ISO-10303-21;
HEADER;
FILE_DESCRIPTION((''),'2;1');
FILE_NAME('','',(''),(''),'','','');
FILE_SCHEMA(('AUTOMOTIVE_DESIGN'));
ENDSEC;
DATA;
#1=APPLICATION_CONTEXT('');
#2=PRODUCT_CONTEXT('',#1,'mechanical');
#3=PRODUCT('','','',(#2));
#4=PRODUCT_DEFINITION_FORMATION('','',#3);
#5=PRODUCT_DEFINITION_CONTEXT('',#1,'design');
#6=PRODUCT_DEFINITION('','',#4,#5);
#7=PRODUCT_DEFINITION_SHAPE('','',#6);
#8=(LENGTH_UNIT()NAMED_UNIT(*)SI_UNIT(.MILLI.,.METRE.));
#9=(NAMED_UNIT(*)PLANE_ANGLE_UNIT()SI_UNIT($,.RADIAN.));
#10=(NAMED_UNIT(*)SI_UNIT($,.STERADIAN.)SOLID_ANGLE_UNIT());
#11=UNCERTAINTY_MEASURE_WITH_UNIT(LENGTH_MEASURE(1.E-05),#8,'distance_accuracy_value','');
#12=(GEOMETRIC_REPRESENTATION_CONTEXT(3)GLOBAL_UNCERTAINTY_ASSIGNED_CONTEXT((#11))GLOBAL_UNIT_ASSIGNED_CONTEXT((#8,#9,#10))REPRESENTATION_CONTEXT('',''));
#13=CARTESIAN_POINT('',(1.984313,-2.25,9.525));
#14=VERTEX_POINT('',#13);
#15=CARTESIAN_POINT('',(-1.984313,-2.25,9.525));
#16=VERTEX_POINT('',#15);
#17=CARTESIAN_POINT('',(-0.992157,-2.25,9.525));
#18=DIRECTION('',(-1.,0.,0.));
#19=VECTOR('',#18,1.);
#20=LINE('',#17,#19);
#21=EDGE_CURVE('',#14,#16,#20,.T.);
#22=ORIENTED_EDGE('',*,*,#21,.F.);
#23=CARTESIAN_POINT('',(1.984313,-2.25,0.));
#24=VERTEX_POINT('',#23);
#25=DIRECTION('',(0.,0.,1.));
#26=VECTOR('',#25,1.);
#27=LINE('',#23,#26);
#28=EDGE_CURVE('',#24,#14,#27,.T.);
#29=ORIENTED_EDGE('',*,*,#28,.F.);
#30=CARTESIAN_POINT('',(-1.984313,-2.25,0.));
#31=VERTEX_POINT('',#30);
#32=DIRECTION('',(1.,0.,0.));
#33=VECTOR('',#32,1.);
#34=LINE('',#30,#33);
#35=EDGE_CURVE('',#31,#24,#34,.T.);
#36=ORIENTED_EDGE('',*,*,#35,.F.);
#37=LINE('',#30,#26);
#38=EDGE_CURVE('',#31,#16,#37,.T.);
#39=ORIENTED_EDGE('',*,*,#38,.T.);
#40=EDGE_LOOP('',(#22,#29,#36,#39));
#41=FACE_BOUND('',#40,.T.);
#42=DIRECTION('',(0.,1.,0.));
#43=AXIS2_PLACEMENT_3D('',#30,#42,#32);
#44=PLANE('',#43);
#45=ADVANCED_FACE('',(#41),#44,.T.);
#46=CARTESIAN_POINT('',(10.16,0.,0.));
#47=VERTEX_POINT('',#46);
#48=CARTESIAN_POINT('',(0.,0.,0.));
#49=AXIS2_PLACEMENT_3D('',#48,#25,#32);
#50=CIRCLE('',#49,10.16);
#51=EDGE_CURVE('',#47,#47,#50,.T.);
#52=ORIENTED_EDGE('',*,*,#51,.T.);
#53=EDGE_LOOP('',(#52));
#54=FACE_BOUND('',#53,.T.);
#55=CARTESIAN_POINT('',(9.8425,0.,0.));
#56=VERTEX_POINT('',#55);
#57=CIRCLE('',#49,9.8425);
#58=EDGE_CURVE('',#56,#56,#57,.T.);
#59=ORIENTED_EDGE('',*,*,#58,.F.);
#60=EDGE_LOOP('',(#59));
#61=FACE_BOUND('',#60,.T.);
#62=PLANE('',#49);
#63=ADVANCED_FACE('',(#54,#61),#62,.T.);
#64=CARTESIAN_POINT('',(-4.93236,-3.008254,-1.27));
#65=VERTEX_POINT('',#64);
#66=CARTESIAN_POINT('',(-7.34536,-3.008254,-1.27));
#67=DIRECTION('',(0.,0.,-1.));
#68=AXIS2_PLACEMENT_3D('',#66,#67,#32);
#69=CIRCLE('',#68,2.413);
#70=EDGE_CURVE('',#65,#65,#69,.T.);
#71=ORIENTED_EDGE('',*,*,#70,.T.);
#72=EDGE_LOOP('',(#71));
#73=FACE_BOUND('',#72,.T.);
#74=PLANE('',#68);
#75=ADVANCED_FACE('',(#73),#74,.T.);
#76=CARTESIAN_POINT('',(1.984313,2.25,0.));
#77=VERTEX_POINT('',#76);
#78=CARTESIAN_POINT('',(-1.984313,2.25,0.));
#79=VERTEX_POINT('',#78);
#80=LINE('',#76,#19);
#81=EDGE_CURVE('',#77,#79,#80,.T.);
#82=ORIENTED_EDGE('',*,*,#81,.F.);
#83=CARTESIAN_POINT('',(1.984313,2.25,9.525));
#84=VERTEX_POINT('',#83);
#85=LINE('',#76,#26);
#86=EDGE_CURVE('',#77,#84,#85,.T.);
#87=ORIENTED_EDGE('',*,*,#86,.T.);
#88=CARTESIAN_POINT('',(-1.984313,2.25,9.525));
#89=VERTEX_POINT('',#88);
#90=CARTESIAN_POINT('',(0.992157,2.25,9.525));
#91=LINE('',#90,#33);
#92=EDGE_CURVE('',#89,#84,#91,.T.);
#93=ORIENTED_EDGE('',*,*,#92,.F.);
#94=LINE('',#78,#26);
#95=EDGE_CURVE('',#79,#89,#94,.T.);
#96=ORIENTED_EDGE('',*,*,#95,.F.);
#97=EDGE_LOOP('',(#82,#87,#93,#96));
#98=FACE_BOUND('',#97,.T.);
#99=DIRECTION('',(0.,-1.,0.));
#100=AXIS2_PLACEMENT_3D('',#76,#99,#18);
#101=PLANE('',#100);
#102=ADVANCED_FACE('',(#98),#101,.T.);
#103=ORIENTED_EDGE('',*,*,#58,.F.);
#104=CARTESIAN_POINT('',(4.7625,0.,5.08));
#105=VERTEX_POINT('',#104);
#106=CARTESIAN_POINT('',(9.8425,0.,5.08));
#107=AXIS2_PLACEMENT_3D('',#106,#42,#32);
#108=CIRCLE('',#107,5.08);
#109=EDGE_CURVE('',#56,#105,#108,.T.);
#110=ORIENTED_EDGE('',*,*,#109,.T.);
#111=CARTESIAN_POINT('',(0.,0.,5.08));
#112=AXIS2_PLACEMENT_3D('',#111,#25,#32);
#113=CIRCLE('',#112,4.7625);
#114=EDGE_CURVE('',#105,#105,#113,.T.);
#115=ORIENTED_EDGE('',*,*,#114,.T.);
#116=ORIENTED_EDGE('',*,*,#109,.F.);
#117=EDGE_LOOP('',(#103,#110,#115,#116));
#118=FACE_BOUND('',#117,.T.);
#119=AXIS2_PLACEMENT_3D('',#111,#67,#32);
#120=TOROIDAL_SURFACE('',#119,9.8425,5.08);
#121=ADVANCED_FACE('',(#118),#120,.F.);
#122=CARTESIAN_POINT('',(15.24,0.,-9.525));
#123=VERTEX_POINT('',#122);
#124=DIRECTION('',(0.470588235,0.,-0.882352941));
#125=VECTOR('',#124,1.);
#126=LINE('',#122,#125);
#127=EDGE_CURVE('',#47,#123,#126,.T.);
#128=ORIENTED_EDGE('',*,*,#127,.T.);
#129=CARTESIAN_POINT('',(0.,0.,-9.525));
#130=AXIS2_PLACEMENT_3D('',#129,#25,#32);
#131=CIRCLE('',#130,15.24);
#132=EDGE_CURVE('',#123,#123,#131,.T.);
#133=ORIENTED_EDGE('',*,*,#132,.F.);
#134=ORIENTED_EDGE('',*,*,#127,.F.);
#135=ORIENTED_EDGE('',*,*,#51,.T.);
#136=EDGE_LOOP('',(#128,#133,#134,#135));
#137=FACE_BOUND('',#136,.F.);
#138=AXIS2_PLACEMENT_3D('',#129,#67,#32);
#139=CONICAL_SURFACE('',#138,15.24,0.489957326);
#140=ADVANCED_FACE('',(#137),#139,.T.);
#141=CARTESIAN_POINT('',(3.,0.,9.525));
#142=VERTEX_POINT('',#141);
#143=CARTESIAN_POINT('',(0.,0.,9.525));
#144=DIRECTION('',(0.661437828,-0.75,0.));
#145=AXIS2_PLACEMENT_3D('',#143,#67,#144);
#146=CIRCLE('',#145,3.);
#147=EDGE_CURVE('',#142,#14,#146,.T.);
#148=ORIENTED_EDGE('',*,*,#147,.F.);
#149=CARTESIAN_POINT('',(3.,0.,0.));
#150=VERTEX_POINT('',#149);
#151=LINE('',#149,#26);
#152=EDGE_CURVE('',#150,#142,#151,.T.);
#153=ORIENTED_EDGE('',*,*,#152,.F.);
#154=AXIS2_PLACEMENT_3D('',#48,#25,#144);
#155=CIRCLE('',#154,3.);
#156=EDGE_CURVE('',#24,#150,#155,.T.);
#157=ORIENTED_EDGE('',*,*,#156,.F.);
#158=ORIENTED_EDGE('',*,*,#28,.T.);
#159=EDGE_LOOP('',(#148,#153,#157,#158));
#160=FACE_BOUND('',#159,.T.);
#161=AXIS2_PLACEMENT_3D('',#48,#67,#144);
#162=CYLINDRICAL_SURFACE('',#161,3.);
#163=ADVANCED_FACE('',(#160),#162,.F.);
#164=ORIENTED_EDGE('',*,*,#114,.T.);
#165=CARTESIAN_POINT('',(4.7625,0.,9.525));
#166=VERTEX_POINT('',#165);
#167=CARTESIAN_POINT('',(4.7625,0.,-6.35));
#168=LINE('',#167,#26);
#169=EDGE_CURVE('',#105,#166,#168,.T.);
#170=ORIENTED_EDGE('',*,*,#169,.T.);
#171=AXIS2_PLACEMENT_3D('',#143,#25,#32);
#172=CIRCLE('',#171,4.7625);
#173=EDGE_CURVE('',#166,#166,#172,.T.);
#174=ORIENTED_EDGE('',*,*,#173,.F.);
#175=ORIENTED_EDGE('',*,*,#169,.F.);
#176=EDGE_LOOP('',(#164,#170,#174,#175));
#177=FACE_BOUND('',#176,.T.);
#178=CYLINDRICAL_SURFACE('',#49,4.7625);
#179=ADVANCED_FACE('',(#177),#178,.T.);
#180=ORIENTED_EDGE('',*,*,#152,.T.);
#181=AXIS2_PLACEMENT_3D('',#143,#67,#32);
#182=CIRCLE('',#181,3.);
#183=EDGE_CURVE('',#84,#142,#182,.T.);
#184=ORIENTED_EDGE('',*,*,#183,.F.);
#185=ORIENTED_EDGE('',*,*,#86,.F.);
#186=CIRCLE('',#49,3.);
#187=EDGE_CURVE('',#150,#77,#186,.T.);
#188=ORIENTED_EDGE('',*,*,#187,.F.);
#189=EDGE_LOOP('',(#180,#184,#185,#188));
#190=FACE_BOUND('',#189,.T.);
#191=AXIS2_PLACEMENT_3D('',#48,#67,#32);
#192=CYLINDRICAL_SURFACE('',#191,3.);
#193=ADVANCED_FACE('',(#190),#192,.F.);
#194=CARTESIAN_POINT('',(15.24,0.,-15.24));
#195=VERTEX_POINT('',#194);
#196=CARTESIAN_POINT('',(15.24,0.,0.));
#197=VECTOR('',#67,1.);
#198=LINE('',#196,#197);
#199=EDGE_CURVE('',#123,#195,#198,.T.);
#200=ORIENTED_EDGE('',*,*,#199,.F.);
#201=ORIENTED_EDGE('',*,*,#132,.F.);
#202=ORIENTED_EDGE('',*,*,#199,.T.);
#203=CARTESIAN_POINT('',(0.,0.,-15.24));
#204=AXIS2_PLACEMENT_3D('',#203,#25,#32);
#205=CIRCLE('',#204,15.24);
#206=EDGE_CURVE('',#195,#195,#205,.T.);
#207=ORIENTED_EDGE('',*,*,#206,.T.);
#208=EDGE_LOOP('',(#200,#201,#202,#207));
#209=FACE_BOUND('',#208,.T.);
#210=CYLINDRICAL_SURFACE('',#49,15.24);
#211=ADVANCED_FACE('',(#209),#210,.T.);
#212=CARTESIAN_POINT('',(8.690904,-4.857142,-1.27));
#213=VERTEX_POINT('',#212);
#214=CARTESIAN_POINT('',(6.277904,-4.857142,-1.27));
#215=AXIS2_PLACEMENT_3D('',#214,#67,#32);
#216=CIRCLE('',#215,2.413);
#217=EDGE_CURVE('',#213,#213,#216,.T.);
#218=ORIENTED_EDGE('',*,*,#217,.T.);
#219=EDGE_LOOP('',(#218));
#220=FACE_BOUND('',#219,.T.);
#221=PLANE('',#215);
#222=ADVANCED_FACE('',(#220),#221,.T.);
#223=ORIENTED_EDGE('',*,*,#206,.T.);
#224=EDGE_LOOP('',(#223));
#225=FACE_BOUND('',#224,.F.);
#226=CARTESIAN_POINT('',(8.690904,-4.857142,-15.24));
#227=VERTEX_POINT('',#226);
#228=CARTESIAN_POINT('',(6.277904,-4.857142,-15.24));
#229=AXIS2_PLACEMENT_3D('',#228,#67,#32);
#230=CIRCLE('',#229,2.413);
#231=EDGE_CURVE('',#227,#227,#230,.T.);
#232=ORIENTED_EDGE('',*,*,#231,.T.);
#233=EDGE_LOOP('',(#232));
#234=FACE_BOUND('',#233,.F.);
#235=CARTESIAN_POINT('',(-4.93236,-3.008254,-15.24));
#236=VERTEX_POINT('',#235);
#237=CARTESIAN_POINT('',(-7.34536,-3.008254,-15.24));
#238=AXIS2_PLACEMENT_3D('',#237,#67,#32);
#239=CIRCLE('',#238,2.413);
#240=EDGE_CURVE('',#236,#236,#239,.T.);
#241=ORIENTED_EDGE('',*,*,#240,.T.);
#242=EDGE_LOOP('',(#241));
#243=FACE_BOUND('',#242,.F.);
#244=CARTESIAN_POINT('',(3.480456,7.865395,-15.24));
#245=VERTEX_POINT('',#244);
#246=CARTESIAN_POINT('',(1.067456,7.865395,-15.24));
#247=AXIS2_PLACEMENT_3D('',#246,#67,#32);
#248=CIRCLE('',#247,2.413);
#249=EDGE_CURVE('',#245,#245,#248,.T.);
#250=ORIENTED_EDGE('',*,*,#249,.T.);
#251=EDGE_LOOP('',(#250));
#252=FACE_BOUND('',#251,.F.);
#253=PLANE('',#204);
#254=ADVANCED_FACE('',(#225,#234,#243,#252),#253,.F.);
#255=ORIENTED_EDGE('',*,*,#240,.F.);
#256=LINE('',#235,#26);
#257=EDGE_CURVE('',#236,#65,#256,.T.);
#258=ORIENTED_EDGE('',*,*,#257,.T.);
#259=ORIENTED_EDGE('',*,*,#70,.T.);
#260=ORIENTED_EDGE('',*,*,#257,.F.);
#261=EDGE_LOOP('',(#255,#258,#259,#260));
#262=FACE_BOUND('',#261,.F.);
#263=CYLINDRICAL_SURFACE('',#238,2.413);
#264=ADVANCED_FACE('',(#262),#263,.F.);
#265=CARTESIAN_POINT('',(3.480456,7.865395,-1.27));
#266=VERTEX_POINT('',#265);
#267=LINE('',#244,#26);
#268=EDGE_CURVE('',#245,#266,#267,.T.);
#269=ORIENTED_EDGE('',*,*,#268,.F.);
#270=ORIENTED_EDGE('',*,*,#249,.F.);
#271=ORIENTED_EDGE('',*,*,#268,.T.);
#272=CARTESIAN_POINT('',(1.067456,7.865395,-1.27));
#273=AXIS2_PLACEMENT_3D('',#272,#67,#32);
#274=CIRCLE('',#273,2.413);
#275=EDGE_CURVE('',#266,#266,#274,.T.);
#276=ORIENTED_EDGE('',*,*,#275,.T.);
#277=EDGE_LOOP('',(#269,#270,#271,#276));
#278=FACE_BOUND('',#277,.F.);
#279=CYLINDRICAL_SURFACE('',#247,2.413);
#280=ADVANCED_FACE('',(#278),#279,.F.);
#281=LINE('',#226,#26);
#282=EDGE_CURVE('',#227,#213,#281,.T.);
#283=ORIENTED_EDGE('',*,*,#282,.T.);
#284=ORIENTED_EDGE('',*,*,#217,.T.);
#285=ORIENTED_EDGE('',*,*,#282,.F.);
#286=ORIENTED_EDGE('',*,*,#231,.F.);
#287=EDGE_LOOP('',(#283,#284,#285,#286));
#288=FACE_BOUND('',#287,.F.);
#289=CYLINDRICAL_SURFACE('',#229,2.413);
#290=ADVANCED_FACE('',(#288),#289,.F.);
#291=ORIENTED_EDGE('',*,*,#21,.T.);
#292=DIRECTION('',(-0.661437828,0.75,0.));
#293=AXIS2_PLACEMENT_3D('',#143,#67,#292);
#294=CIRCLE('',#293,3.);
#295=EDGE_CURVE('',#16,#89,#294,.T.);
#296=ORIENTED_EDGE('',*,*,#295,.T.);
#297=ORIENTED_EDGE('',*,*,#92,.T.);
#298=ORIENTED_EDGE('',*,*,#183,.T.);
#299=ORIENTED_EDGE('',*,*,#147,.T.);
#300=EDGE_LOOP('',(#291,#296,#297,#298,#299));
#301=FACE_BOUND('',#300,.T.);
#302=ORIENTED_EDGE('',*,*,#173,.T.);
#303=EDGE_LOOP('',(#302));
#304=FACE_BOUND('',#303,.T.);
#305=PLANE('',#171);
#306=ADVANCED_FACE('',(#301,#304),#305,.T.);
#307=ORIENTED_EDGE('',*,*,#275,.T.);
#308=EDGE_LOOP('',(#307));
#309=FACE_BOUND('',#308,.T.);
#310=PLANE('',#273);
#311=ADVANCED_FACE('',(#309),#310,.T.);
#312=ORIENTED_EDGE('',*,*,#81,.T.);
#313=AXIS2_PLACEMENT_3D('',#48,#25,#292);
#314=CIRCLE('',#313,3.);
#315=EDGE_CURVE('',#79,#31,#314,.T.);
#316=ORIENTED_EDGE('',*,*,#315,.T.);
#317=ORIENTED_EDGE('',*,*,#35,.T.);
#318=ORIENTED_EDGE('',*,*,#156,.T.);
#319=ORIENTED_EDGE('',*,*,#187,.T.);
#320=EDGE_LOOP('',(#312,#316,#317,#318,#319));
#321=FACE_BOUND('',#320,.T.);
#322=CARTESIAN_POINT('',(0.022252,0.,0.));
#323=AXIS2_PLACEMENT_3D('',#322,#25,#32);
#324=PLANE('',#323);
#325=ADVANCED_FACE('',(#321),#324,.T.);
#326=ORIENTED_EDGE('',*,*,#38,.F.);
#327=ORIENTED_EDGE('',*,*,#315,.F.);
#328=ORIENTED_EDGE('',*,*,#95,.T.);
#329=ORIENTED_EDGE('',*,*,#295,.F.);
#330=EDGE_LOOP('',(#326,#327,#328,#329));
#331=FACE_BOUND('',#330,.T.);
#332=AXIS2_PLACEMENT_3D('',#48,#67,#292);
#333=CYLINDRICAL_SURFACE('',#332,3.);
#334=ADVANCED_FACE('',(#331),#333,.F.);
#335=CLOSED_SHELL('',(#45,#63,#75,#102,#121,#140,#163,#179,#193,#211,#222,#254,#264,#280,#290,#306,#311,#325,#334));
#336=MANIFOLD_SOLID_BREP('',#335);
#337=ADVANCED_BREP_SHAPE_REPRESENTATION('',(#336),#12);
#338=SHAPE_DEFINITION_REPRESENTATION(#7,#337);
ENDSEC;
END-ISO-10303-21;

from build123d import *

# Parameters (mm, degrees)
F0_R          = 4.7625
F1_DEPTH      = 9.525
F1_DEPTH_BACK = 6.35
F3_DEPTH      = 9.526
F4_R          = 15.24
F5_DEPTH      = 15.24
F6_R          = 2.413
F7_DEPTH      = 13.97
F8_SIZE2      = 9.525
F8_SIZE       = 5.08
F9_R          = 5.08


with BuildPart() as f1:
    # F0 (on Top) → F1 (new body, two sides)
    with BuildSketch(Plane.XY) as f1_sk:
        Circle(F0_R)
    extrude(amount=F1_DEPTH)
    extrude(f1_sk.sketch, amount=-F1_DEPTH_BACK)

    # F2 (on Top) → F3 (cut, through all)
    with BuildSketch(Plane.XY):
        with BuildLine():
            ThreePointArc((1.9843134833, -2.25), (2.7343134833, -1.2343134833), (3, 0))
            ThreePointArc((3, 0), (2.7343134833, 1.2343134833), (1.9843134833, 2.25))
            Line((1.9843134833, 2.25), (-1.9843134833, 2.25))
            ThreePointArc((-1.9843134833, 2.25), (-3, 0), (-1.9843134833, -2.25))
            Line((-1.9843134833, -2.25), (1.9843134833, -2.25))
        make_face()
    extrude(amount=F3_DEPTH, mode=Mode.SUBTRACT)

    # F4 (on Top) → F5 (join)
    with BuildSketch(Plane.XY):
        Circle(F4_R)
    extrude(amount=-F5_DEPTH)

    # F6 (on face) → F7 (cut)
    with BuildSketch(Plane(origin=(0, 0, -15.24), x_dir=(1, 0, 0), z_dir=(0, 0, -1))):
        with Locations((1.0674559099, -7.8653953575)):
            Circle(F6_R)
        with Locations((6.2779042355, 4.8571416142)):
            Circle(F6_R)
        with Locations((-7.3453601454, 3.0082537434)):
            Circle(F6_R)
    extrude(amount=-F7_DEPTH, mode=Mode.SUBTRACT)

    # F8
    f8_edges = [f1.edges().sort_by_distance(p)[0] for p in [
        (-15.24, 0, 0),
    ]]
    f8_side = f1.faces().sort_by_distance((-14.808948, 0, 0))[0]
    chamfer(f8_edges, length=F8_SIZE, length2=F8_SIZE2, reference=f8_side)

    # F9
    f9_edges = [f1.edges().sort_by_distance(p)[0] for p in [
        (-4.7625, 0, 0),
    ]]
    fillet(f9_edges, radius=F9_R)


solid = f1.part
